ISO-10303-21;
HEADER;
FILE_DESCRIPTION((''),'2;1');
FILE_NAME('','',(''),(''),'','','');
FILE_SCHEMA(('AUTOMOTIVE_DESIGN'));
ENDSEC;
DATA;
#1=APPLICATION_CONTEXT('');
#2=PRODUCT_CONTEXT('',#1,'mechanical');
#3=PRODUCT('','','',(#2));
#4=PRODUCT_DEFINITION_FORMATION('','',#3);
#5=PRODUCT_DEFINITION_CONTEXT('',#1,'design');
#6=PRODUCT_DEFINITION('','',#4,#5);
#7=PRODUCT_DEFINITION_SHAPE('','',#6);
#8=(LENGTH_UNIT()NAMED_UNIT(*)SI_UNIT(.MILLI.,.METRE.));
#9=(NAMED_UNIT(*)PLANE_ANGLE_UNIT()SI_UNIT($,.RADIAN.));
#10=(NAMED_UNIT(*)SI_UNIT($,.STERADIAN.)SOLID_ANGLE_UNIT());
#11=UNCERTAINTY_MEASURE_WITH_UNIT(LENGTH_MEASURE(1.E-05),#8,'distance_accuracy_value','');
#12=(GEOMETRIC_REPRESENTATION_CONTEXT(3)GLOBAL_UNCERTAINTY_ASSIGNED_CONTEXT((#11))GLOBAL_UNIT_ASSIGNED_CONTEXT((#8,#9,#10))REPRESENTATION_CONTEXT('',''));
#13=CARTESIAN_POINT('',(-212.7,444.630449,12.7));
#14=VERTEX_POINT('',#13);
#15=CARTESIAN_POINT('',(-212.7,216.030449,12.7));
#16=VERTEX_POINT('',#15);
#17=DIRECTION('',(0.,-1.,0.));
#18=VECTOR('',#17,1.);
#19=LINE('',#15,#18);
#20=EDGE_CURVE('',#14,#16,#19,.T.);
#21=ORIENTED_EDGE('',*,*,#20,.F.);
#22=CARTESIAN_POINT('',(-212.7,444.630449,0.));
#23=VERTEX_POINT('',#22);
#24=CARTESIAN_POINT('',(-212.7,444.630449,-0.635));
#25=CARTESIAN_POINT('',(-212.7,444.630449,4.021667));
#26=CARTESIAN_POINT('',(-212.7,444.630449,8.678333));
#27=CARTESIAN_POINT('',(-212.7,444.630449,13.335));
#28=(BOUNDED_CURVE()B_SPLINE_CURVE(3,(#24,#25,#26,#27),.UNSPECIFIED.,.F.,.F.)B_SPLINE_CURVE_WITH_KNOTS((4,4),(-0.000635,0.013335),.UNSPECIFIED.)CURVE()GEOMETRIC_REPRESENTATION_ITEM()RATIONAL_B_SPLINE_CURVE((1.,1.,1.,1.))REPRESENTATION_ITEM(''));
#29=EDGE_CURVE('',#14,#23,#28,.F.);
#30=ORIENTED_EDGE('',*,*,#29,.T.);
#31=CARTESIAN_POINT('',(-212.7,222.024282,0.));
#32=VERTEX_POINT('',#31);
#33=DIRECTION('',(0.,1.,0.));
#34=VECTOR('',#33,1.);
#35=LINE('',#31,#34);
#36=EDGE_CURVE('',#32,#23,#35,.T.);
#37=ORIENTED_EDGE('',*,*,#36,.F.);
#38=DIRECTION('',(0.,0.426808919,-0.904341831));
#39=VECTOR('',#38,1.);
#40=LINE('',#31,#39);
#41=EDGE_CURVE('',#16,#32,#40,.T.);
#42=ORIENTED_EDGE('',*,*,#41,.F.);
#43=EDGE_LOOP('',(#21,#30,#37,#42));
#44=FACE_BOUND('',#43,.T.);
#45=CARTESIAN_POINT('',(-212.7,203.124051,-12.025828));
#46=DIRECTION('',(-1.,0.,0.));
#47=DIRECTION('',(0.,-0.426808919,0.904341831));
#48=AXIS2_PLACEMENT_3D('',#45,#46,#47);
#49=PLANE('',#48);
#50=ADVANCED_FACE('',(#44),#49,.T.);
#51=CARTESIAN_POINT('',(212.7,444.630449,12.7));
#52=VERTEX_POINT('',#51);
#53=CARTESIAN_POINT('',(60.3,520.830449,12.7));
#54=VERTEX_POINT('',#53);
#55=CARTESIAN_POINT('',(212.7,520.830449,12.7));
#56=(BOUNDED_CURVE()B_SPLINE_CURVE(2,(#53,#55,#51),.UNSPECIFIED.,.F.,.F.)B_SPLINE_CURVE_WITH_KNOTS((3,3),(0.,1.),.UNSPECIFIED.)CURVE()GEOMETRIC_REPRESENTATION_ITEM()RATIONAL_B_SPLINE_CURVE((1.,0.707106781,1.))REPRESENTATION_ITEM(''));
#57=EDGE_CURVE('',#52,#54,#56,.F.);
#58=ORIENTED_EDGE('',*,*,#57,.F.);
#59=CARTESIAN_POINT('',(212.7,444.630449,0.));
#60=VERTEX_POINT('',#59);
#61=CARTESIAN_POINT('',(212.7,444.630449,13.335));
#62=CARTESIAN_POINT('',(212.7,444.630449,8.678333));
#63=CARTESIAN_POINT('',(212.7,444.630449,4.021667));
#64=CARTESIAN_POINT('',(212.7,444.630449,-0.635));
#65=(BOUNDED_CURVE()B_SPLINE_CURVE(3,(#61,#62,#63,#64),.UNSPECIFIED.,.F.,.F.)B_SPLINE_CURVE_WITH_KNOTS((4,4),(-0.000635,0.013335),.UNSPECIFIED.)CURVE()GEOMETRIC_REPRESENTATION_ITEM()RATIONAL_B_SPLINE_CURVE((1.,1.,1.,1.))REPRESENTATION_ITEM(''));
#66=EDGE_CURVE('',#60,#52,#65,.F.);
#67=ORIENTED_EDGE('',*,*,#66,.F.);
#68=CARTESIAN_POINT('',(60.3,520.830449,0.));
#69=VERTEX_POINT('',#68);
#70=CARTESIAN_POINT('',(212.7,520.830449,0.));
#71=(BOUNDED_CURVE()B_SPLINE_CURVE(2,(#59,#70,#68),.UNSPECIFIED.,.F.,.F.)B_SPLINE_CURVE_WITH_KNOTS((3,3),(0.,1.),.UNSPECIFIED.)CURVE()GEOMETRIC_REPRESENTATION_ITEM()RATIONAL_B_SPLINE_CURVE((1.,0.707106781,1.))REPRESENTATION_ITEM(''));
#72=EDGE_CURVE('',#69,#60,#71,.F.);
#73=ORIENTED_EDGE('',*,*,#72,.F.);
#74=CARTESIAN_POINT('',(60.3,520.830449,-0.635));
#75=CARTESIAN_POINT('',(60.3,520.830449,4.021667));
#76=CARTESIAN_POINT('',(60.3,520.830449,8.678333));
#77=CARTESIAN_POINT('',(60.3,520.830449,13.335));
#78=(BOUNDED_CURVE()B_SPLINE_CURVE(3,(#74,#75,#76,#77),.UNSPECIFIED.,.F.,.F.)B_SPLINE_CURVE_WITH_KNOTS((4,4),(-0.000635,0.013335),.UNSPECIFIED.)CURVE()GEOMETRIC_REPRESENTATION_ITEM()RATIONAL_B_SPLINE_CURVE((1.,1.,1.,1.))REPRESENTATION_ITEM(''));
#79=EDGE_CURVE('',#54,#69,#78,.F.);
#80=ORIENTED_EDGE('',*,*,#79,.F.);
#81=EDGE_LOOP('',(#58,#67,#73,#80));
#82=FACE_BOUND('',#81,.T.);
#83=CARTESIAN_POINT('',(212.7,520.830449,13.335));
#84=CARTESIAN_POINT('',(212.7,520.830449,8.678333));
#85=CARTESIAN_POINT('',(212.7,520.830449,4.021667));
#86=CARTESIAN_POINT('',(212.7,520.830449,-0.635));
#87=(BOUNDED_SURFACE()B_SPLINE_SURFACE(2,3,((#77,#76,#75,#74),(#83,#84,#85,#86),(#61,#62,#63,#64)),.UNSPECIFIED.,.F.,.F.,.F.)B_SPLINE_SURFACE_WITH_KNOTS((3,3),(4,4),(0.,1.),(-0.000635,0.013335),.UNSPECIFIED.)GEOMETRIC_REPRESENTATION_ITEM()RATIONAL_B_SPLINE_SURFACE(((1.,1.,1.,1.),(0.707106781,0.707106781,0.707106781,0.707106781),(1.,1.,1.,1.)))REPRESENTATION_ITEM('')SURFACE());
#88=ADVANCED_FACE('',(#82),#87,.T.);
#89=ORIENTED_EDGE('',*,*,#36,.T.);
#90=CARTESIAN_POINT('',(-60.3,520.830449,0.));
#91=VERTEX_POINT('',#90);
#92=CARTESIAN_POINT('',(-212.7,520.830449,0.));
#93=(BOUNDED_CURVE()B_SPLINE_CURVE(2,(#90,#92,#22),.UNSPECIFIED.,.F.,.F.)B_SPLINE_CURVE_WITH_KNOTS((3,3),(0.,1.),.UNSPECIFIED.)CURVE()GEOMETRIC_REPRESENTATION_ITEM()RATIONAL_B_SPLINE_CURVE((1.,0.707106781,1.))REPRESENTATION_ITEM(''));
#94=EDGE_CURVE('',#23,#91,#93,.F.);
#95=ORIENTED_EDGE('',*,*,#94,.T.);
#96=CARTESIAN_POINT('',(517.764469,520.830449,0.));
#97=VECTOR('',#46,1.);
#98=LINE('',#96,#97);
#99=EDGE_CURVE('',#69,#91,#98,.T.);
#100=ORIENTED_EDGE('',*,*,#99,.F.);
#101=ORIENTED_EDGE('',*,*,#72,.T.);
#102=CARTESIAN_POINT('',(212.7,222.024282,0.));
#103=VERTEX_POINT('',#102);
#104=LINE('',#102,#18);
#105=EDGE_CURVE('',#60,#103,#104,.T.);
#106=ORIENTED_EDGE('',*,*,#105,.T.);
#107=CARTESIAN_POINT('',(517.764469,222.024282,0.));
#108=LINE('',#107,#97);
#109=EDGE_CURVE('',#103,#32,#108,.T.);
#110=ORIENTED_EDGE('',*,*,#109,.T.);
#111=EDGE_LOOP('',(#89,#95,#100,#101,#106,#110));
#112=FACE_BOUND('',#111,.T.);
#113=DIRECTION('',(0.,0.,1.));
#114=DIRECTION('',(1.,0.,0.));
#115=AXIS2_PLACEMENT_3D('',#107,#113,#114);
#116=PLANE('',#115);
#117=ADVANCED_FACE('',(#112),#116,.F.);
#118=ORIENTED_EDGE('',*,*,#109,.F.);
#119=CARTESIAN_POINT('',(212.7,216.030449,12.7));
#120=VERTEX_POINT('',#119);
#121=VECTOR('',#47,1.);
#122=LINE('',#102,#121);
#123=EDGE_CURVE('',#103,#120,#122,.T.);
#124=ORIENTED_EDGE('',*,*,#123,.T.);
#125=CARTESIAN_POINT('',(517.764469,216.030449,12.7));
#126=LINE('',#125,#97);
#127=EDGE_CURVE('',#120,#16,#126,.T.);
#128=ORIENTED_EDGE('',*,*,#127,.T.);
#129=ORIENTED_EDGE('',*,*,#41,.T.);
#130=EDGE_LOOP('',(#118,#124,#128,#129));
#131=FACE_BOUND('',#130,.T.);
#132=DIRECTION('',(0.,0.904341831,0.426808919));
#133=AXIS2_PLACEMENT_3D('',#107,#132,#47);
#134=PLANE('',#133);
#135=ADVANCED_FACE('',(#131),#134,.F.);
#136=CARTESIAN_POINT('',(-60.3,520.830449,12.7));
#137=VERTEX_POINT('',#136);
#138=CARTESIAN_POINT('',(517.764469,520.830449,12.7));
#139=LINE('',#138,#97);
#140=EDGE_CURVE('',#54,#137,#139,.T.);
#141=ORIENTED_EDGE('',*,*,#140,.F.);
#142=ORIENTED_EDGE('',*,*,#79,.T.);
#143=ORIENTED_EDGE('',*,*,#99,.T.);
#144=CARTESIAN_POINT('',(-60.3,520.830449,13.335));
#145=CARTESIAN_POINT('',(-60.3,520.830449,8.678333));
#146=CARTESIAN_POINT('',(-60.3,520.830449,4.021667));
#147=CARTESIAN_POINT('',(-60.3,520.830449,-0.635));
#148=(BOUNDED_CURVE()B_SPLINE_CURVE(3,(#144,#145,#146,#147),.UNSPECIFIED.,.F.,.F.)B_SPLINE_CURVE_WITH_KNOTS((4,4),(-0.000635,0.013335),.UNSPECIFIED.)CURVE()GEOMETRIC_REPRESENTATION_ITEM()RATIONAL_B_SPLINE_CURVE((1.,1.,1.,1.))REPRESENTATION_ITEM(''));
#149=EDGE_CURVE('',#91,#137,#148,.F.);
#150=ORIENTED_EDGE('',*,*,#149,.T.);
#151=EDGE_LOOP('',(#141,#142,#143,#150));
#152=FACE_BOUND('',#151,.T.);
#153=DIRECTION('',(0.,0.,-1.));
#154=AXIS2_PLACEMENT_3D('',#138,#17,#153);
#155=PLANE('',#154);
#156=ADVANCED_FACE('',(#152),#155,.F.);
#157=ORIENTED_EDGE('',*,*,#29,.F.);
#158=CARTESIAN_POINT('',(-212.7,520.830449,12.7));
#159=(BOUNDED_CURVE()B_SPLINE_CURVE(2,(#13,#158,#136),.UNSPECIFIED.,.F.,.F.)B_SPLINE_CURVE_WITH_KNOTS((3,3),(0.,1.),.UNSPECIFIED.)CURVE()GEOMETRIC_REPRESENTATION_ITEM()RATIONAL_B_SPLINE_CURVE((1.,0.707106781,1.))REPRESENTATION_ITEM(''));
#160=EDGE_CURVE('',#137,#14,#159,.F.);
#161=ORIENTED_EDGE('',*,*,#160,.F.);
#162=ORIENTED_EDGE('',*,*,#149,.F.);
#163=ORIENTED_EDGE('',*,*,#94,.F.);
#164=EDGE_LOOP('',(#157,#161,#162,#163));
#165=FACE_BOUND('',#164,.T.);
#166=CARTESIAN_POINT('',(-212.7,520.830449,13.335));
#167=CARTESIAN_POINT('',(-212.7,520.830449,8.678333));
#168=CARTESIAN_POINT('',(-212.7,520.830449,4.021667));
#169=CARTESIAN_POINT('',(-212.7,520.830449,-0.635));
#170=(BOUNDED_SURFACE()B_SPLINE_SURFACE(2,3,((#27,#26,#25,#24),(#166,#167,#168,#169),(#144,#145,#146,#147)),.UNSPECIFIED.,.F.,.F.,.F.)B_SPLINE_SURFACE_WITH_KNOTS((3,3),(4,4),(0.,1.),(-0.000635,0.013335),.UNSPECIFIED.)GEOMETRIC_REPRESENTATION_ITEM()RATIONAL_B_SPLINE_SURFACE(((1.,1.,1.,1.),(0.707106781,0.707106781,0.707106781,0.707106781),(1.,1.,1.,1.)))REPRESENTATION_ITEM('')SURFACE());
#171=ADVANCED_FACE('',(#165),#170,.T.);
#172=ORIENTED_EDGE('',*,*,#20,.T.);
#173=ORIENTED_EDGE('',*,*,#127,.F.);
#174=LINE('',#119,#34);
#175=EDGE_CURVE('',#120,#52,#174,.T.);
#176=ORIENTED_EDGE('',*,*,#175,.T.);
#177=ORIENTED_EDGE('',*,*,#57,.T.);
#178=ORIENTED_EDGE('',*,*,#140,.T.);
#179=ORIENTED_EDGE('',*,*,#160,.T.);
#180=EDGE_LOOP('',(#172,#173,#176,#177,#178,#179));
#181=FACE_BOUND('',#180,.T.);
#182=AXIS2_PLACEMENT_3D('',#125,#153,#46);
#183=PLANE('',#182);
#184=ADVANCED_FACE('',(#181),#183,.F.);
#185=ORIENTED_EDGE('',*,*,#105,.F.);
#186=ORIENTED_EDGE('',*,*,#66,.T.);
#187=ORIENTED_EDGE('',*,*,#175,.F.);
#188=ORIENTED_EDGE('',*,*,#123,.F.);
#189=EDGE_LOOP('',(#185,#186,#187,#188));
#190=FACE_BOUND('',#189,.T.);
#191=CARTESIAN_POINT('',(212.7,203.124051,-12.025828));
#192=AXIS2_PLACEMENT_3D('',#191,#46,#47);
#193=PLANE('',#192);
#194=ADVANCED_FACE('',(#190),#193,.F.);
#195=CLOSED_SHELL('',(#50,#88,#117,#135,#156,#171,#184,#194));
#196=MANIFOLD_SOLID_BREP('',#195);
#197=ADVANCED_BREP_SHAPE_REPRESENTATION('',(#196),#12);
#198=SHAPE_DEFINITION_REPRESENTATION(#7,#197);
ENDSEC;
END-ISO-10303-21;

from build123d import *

# Parameters (mm, degrees)
BOSS_EXTRUDE1_DEPTH      = 212.7
BOSS_EXTRUDE1_DEPTH_BACK = 212.7
FILLET1_SIZE             = 76.2
FILLET1_SIZE_2           = 152.4


with BuildPart() as part:
    # Sketch2 → Boss-Extrude1 (new, two sides: drawn at the far end of the back side and taken through both)
    with BuildSketch(Plane(origin=(0, 0, 0), x_dir=(0, 0, -1), z_dir=(1, 0, 0)).offset(-BOSS_EXTRUDE1_DEPTH_BACK)):
        Polygon((0, 222.024281539), (0, 520.830449238), (-12.7, 520.830449238), (-12.7, 216.030449238), align=None)
    extrude(amount=BOSS_EXTRUDE1_DEPTH + BOSS_EXTRUDE1_DEPTH_BACK)

    # Fillet1
    # an asymmetric fillet: 152.4, 76.2 mm, written as the material it takes off along each edge
    with BuildSketch(Plane(origin=(-212.7, 520.830449238, -381), x_dir=(0, -1, 0), z_dir=(0, 0, 1))) as fillet1_piece_1:
        with BuildLine():
            Bezier((FILLET1_SIZE, 0), (0, 0), (0, FILLET1_SIZE_2), weights=[1, 0.707106781, 1])
            Line((0, FILLET1_SIZE_2), (0, 0))
            Line((0, 0), (FILLET1_SIZE, 0))
        make_face()
    extrude(amount=774.7, mode=Mode.SUBTRACT)
    with BuildSketch(Plane(origin=(212.7, 520.830449238, -381), x_dir=(-1, 0, 0), z_dir=(0, 0, 1))) as fillet1_piece_2:
        with BuildLine():
            Bezier((FILLET1_SIZE_2, 0), (0, 0), (0, FILLET1_SIZE), weights=[1, 0.707106781, 1])
            Line((0, FILLET1_SIZE), (0, 0))
            Line((0, 0), (FILLET1_SIZE_2, 0))
        make_face()
    extrude(amount=774.7, mode=Mode.SUBTRACT)


solid = part.part
